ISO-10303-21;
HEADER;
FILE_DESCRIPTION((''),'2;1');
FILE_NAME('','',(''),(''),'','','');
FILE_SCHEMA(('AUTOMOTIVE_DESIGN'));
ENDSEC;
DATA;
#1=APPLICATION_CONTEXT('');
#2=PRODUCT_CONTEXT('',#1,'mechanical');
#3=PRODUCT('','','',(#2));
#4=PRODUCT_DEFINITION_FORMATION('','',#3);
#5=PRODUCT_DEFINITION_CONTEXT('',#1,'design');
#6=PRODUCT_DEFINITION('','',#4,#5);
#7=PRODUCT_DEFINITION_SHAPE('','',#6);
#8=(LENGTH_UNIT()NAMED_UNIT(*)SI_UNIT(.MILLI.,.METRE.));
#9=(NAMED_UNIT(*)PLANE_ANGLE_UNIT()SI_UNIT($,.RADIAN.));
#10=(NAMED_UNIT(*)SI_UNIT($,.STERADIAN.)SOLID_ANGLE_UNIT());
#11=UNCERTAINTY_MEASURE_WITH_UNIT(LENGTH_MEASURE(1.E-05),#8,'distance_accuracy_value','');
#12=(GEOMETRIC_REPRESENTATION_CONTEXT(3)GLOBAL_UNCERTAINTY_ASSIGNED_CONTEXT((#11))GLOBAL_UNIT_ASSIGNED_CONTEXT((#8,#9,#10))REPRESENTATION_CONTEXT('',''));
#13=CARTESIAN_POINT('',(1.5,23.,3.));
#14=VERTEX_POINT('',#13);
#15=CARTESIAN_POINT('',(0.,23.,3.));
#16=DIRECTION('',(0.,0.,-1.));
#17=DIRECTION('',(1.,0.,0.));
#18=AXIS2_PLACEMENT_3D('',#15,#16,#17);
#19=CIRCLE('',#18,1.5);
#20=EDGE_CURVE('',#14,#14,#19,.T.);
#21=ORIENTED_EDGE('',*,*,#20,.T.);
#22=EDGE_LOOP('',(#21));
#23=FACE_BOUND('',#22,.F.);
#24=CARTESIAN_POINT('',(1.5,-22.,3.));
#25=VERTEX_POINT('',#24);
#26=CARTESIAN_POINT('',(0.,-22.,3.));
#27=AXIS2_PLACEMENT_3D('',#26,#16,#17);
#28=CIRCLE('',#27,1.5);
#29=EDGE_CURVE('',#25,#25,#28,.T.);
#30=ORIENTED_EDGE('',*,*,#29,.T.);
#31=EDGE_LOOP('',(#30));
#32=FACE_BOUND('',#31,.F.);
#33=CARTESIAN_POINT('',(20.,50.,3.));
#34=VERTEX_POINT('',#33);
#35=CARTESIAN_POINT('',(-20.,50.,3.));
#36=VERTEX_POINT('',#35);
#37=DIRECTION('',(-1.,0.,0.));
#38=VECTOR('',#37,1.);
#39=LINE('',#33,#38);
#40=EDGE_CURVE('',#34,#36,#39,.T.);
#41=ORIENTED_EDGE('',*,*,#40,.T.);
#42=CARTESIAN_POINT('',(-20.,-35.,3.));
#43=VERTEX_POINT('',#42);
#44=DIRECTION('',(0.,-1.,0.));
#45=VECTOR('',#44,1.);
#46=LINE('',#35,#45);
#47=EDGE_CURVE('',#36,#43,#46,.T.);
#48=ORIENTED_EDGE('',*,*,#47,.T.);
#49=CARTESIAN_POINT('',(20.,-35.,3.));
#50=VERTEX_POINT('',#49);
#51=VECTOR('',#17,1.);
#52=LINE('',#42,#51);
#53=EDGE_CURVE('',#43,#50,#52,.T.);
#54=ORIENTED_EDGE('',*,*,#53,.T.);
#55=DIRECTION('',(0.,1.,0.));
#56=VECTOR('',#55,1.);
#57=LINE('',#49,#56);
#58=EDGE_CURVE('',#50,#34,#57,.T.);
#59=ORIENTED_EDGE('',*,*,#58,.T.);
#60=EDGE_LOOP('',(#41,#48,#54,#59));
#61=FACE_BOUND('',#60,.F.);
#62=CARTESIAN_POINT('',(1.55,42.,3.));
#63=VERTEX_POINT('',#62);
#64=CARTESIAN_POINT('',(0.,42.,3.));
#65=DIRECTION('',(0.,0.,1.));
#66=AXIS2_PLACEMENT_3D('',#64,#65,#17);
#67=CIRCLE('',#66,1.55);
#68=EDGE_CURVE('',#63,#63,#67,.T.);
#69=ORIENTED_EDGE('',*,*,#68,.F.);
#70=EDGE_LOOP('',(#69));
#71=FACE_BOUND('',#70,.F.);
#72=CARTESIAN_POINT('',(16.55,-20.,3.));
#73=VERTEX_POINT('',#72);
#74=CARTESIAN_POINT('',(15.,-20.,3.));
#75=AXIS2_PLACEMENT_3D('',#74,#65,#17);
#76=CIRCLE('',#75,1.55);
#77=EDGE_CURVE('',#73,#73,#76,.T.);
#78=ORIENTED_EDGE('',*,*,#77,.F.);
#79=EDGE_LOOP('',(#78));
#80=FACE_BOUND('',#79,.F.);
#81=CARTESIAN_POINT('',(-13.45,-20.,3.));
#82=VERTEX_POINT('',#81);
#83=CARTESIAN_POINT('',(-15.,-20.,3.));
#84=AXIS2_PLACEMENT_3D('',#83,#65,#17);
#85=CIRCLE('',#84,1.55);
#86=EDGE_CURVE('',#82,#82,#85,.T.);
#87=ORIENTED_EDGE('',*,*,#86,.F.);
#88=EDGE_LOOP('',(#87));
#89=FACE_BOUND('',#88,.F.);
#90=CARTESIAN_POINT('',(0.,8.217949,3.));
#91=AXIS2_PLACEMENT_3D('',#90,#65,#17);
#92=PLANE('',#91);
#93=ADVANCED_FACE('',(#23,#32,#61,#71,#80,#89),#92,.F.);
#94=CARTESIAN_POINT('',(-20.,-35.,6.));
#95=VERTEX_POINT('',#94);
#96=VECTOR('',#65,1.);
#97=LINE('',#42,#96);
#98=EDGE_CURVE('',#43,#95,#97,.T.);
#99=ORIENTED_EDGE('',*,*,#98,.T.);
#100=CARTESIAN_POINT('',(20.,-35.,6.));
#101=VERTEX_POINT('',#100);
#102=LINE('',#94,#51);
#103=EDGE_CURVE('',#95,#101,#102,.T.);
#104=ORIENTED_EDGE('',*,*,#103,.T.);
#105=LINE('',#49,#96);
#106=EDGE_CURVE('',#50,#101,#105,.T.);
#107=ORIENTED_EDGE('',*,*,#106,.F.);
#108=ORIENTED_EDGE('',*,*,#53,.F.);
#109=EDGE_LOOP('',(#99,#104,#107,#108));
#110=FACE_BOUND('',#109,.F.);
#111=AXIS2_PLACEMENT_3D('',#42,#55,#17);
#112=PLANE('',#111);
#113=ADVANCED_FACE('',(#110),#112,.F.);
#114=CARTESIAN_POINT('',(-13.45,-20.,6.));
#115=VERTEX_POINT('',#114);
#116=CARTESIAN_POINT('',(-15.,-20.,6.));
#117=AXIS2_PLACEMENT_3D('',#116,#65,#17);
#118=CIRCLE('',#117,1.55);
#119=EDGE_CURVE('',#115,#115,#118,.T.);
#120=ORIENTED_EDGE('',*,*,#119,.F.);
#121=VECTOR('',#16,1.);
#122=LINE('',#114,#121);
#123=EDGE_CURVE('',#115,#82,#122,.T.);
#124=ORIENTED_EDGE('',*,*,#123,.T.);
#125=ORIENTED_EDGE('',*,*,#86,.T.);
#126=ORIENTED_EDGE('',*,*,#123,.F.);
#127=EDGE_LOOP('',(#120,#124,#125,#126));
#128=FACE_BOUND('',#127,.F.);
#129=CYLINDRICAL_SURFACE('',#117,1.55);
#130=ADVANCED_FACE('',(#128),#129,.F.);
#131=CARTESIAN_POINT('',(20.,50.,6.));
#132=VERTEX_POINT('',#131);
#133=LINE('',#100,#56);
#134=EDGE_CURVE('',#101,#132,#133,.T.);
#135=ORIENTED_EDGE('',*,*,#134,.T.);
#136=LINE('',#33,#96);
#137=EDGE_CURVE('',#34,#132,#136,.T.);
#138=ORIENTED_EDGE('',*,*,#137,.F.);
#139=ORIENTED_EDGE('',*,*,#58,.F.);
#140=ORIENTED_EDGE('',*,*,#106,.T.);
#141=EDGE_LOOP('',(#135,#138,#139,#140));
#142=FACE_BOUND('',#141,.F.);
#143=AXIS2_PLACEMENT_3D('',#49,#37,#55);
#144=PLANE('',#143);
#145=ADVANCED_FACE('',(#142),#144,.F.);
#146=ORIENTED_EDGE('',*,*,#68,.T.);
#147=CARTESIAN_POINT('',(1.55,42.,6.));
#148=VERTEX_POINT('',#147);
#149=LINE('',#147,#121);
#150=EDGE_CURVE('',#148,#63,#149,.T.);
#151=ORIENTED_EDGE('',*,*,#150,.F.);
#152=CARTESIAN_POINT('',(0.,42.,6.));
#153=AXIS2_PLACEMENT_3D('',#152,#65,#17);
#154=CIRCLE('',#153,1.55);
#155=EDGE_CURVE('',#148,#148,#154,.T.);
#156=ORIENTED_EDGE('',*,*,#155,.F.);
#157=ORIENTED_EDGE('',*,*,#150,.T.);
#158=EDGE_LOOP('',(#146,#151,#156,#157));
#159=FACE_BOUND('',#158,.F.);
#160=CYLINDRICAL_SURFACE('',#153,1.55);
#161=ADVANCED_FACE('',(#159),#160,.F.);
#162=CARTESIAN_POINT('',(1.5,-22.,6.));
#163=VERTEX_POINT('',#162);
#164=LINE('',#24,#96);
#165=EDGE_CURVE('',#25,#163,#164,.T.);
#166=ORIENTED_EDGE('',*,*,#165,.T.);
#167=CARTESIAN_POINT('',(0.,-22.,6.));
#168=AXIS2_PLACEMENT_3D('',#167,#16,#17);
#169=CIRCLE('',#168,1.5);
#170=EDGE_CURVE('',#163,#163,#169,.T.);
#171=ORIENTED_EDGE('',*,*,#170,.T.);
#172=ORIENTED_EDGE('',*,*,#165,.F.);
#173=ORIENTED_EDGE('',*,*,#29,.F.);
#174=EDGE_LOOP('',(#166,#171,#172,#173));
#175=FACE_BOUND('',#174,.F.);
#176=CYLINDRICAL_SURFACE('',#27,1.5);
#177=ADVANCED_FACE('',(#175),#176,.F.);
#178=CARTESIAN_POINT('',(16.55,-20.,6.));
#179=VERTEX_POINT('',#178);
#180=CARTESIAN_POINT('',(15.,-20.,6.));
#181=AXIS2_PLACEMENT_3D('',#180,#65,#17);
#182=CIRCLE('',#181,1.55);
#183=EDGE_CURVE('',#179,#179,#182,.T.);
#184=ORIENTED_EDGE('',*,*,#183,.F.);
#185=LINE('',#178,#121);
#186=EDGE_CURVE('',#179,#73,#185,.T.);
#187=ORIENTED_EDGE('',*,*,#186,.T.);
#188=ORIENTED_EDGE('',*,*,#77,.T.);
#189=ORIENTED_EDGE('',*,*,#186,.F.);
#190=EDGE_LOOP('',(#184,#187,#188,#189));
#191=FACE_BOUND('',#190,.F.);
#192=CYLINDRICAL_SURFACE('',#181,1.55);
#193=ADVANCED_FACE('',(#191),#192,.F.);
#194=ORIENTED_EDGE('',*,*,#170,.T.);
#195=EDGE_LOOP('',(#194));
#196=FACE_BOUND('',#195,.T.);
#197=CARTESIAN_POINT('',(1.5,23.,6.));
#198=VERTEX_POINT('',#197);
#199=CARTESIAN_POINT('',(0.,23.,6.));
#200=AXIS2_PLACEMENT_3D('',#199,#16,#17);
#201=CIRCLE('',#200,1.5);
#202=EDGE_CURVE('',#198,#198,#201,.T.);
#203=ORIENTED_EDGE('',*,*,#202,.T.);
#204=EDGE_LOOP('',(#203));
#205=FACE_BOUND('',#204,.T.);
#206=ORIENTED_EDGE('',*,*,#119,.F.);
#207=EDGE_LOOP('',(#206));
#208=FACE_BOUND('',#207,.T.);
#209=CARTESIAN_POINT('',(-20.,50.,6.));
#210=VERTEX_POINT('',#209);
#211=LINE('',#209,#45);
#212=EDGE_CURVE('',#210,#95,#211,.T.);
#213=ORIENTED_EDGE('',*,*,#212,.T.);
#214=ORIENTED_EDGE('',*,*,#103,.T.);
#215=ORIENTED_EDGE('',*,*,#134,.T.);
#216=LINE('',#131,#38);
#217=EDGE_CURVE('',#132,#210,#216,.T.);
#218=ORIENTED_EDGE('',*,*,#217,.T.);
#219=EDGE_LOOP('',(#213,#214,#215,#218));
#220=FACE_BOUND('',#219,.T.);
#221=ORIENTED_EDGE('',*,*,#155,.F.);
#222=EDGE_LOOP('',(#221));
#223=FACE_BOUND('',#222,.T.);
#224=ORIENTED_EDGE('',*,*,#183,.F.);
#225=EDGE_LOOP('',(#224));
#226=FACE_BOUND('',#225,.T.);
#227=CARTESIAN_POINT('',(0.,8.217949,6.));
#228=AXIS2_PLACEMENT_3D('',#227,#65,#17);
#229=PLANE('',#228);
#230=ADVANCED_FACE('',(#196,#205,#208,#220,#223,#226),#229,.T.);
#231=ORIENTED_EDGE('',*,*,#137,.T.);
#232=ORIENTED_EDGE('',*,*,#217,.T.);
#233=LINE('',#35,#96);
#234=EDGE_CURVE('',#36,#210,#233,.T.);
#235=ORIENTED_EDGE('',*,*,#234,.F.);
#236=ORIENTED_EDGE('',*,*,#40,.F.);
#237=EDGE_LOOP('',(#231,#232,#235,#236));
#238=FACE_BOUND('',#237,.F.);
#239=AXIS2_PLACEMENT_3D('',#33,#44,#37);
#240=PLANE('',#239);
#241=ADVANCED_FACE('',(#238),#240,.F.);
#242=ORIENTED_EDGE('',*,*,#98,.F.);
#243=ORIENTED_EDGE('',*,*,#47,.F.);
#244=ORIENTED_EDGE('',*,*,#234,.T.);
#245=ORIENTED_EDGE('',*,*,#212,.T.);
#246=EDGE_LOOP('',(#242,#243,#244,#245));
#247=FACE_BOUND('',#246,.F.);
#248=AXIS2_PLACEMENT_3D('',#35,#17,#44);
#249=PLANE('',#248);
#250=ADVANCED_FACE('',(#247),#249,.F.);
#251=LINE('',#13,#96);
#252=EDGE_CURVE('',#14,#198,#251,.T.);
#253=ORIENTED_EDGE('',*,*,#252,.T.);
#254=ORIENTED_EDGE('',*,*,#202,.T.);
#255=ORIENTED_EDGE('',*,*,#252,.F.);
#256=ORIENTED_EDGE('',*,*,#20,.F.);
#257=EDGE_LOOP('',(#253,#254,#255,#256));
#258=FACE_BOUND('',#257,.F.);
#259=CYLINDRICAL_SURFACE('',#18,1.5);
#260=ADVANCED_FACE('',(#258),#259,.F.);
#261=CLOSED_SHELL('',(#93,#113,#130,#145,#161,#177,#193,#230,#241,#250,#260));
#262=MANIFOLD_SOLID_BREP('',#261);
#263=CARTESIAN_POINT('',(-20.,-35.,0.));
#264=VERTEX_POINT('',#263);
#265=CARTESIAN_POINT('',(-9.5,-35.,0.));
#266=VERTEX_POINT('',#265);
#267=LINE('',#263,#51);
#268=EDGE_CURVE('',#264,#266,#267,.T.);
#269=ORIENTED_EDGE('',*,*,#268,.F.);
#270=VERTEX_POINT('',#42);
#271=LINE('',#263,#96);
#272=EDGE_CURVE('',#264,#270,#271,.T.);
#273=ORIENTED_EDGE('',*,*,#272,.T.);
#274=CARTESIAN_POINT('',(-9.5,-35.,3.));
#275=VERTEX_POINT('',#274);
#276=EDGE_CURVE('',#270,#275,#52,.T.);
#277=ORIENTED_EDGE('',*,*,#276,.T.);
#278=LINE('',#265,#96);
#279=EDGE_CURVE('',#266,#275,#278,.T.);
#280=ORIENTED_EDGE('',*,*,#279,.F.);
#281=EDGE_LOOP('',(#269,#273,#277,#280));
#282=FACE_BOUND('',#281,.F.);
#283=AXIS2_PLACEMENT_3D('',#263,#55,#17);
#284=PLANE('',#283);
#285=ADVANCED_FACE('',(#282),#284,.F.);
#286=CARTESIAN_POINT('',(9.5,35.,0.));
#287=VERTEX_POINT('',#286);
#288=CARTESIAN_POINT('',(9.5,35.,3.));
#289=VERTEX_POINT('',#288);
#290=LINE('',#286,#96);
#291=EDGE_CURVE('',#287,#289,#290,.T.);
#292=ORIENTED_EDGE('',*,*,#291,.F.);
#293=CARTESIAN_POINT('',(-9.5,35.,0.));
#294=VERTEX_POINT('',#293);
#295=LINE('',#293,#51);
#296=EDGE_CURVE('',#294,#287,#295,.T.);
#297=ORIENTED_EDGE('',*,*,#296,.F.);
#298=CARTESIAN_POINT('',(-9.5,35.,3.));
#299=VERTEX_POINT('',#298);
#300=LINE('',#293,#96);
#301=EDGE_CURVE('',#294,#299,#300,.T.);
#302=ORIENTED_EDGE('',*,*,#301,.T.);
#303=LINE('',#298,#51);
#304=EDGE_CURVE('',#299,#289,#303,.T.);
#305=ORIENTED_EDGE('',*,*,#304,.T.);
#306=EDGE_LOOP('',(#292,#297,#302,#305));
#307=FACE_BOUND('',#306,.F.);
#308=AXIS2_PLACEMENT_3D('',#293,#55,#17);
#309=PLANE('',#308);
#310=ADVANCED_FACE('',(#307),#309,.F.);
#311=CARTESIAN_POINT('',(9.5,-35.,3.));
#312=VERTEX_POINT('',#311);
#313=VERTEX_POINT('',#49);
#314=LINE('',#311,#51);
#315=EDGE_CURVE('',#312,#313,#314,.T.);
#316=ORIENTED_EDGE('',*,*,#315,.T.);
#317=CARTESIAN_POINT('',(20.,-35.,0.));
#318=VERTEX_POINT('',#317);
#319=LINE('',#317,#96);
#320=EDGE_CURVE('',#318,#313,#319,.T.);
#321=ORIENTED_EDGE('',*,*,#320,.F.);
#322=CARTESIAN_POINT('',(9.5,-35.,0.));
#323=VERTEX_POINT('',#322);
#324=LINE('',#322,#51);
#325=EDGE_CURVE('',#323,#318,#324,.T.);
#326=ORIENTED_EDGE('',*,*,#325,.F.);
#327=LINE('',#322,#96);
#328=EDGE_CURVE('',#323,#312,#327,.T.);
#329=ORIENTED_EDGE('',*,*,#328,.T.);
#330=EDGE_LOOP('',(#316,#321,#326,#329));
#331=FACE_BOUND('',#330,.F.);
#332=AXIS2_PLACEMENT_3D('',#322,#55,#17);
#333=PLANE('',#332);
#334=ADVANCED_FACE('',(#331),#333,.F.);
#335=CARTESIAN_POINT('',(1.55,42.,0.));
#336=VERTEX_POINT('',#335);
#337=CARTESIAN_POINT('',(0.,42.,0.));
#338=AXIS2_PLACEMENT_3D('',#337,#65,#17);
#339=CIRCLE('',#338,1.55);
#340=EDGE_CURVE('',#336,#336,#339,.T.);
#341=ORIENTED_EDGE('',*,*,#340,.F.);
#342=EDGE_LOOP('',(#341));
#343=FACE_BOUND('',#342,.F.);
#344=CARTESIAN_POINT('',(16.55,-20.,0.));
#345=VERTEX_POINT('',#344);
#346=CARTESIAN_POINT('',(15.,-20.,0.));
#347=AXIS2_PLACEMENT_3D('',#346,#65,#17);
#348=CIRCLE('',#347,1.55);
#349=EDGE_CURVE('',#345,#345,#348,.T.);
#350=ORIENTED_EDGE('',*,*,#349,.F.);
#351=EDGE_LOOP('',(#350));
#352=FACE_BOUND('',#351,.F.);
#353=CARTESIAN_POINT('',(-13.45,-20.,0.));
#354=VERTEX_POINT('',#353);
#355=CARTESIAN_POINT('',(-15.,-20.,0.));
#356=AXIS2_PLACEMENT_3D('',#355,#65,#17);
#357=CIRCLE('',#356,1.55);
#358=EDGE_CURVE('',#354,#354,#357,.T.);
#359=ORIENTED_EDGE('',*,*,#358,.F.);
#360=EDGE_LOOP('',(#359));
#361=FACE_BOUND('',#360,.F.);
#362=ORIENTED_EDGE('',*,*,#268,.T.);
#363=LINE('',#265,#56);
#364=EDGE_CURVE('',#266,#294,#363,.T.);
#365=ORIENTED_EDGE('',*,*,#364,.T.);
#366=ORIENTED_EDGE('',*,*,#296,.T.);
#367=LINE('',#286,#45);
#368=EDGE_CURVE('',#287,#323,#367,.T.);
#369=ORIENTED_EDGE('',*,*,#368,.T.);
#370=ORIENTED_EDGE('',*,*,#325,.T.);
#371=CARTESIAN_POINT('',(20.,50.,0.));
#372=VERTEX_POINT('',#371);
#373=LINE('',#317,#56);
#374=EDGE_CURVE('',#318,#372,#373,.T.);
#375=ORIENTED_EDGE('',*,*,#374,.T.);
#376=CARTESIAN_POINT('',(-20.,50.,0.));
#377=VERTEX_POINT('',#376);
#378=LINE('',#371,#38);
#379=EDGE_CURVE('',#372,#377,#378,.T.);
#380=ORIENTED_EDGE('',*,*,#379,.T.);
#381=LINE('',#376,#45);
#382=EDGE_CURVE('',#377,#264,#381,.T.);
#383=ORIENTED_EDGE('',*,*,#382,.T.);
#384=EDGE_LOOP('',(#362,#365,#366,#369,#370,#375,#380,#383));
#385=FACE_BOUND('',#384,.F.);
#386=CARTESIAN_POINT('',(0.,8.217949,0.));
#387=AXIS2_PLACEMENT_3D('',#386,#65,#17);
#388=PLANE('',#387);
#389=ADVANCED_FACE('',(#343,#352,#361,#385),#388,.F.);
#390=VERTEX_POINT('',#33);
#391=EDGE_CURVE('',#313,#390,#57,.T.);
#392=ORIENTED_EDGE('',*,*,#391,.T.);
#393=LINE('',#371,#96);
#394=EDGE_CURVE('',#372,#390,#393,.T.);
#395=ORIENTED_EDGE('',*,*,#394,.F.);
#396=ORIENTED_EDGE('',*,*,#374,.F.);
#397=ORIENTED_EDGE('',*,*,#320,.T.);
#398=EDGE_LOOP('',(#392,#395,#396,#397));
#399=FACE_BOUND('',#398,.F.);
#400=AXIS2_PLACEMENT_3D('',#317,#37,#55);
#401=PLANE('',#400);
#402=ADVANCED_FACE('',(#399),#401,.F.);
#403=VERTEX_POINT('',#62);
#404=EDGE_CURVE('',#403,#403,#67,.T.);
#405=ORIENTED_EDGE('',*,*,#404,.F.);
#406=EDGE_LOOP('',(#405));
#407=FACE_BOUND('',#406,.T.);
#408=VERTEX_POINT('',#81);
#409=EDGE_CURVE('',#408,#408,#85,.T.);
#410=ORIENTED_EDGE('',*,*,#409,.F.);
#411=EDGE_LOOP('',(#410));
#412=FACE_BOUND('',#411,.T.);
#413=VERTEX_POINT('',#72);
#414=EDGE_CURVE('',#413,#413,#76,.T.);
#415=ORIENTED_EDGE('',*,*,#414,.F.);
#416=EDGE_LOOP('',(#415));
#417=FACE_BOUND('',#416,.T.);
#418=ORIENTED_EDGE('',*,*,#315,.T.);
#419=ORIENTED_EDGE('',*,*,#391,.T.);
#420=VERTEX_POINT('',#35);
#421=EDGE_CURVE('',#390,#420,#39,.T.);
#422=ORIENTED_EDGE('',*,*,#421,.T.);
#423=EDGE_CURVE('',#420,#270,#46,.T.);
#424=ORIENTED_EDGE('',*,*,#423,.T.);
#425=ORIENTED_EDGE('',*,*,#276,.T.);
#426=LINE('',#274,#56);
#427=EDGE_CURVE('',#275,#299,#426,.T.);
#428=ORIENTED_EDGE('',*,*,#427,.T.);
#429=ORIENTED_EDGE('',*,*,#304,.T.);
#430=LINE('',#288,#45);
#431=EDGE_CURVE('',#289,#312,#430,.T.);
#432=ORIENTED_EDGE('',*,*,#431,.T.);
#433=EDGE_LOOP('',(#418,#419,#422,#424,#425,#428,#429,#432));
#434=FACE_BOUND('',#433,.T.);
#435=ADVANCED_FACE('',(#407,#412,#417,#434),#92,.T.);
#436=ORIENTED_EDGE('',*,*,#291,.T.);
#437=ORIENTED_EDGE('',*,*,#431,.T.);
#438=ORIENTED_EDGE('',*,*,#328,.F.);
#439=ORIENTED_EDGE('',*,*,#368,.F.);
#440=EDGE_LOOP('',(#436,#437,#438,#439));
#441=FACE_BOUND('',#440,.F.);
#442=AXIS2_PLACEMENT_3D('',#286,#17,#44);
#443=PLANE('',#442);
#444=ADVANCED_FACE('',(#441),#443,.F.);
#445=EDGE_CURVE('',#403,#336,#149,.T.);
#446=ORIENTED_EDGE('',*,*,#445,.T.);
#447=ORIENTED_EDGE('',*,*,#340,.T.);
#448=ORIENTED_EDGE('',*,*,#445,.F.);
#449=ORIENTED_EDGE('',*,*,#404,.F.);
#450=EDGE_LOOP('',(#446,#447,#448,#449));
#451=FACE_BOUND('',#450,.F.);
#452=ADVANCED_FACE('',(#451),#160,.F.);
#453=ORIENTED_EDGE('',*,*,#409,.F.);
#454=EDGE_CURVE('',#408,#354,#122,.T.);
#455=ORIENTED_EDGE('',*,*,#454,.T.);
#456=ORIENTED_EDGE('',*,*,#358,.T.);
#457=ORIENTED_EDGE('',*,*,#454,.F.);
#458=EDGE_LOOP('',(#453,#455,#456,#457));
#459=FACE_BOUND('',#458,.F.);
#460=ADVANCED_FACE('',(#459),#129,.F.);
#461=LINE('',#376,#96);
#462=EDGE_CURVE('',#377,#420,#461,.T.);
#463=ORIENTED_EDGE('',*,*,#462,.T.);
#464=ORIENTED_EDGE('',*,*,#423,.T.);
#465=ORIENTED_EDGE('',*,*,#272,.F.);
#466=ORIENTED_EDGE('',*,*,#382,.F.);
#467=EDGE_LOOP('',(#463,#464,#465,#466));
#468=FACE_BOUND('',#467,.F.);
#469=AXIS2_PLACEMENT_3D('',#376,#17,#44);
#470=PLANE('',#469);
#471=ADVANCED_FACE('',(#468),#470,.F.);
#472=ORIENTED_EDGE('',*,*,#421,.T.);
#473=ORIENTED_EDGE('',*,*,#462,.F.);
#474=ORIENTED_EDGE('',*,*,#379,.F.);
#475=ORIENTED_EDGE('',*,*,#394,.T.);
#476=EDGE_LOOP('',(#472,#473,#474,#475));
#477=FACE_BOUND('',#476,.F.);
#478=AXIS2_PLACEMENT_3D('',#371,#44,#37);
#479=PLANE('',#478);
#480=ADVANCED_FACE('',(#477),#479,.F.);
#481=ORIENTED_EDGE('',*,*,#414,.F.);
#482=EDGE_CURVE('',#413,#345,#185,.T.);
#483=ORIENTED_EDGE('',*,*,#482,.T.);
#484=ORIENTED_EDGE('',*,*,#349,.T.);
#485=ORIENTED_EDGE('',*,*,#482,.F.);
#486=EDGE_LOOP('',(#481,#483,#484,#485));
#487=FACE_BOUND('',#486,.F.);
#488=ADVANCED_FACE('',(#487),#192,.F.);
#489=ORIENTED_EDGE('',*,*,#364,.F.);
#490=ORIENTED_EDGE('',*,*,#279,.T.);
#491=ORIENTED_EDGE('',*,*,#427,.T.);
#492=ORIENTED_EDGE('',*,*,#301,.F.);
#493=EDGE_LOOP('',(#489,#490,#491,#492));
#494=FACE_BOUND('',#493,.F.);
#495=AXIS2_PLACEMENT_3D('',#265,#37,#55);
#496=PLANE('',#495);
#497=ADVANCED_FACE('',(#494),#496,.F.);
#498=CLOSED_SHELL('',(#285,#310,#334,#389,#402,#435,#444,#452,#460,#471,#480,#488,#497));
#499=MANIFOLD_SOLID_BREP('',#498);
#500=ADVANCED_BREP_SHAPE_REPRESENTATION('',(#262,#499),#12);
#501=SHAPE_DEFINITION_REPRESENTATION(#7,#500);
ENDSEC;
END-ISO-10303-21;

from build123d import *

# Parameters (mm, degrees)
F1_DEPTH = 3
F2_W     = 19
F2_H     = 70
F3_DEPTH = 3
F4_R     = 1.55
F5_DEPTH = 25
F6_R     = 1.5
F7_DEPTH = 25


with BuildPart() as f1:
    # F0 (on Top) → F1 (new body)
    with BuildSketch(Plane.XY):
        Polygon((-9.5, 35), (9.5, 35), (9.5, -35), (20, -35), (20, 50), (-20, 50), (-20, -35), (-9.5, -35), align=None)
    extrude(amount=F1_DEPTH)


with BuildPart() as f3:
    # F2 (on face) → F3 (new body)
    with BuildSketch(Plane.XY.offset(3)):
        Polygon((20, -35), (20, 50), (-20, 50), (-20, -35), (-9.5, -35), (-9.5, 35), (9.5, 35), (9.5, -35), align=None)
        Rectangle(F2_W, F2_H)
    extrude(amount=F3_DEPTH)


with BuildPart() as f5_tool:
    # F4 (on face) → F5 (new body)
    with BuildSketch(Plane.XY.offset(6)):
        with Locations((-15, -20)):
            Circle(F4_R)
        with Locations((15, -20)):
            Circle(F4_R)
        with Locations((0, 42)):
            Circle(F4_R)
    extrude(amount=-F5_DEPTH)


with BuildPart() as f1_1:
    add(f1.part)

    # F5: cut by f5_tool
    add(f5_tool.part, mode=Mode.SUBTRACT)


with BuildPart() as f3_1:
    add(f3.part)

    # F5: cut by f5_tool
    add(f5_tool.part, mode=Mode.SUBTRACT)

    # F6 (on face) → F7 (cut)
    with BuildSketch(Plane(origin=(0, 0, 3), x_dir=(1, 0, 0), z_dir=(0, 0, -1))):
        with Locations((0, -23)):
            Circle(F6_R)
        with Locations((0, 22)):
            Circle(F6_R)
    extrude(amount=-F7_DEPTH, mode=Mode.SUBTRACT)


solid = Compound([f1_1.part, f3_1.part])
